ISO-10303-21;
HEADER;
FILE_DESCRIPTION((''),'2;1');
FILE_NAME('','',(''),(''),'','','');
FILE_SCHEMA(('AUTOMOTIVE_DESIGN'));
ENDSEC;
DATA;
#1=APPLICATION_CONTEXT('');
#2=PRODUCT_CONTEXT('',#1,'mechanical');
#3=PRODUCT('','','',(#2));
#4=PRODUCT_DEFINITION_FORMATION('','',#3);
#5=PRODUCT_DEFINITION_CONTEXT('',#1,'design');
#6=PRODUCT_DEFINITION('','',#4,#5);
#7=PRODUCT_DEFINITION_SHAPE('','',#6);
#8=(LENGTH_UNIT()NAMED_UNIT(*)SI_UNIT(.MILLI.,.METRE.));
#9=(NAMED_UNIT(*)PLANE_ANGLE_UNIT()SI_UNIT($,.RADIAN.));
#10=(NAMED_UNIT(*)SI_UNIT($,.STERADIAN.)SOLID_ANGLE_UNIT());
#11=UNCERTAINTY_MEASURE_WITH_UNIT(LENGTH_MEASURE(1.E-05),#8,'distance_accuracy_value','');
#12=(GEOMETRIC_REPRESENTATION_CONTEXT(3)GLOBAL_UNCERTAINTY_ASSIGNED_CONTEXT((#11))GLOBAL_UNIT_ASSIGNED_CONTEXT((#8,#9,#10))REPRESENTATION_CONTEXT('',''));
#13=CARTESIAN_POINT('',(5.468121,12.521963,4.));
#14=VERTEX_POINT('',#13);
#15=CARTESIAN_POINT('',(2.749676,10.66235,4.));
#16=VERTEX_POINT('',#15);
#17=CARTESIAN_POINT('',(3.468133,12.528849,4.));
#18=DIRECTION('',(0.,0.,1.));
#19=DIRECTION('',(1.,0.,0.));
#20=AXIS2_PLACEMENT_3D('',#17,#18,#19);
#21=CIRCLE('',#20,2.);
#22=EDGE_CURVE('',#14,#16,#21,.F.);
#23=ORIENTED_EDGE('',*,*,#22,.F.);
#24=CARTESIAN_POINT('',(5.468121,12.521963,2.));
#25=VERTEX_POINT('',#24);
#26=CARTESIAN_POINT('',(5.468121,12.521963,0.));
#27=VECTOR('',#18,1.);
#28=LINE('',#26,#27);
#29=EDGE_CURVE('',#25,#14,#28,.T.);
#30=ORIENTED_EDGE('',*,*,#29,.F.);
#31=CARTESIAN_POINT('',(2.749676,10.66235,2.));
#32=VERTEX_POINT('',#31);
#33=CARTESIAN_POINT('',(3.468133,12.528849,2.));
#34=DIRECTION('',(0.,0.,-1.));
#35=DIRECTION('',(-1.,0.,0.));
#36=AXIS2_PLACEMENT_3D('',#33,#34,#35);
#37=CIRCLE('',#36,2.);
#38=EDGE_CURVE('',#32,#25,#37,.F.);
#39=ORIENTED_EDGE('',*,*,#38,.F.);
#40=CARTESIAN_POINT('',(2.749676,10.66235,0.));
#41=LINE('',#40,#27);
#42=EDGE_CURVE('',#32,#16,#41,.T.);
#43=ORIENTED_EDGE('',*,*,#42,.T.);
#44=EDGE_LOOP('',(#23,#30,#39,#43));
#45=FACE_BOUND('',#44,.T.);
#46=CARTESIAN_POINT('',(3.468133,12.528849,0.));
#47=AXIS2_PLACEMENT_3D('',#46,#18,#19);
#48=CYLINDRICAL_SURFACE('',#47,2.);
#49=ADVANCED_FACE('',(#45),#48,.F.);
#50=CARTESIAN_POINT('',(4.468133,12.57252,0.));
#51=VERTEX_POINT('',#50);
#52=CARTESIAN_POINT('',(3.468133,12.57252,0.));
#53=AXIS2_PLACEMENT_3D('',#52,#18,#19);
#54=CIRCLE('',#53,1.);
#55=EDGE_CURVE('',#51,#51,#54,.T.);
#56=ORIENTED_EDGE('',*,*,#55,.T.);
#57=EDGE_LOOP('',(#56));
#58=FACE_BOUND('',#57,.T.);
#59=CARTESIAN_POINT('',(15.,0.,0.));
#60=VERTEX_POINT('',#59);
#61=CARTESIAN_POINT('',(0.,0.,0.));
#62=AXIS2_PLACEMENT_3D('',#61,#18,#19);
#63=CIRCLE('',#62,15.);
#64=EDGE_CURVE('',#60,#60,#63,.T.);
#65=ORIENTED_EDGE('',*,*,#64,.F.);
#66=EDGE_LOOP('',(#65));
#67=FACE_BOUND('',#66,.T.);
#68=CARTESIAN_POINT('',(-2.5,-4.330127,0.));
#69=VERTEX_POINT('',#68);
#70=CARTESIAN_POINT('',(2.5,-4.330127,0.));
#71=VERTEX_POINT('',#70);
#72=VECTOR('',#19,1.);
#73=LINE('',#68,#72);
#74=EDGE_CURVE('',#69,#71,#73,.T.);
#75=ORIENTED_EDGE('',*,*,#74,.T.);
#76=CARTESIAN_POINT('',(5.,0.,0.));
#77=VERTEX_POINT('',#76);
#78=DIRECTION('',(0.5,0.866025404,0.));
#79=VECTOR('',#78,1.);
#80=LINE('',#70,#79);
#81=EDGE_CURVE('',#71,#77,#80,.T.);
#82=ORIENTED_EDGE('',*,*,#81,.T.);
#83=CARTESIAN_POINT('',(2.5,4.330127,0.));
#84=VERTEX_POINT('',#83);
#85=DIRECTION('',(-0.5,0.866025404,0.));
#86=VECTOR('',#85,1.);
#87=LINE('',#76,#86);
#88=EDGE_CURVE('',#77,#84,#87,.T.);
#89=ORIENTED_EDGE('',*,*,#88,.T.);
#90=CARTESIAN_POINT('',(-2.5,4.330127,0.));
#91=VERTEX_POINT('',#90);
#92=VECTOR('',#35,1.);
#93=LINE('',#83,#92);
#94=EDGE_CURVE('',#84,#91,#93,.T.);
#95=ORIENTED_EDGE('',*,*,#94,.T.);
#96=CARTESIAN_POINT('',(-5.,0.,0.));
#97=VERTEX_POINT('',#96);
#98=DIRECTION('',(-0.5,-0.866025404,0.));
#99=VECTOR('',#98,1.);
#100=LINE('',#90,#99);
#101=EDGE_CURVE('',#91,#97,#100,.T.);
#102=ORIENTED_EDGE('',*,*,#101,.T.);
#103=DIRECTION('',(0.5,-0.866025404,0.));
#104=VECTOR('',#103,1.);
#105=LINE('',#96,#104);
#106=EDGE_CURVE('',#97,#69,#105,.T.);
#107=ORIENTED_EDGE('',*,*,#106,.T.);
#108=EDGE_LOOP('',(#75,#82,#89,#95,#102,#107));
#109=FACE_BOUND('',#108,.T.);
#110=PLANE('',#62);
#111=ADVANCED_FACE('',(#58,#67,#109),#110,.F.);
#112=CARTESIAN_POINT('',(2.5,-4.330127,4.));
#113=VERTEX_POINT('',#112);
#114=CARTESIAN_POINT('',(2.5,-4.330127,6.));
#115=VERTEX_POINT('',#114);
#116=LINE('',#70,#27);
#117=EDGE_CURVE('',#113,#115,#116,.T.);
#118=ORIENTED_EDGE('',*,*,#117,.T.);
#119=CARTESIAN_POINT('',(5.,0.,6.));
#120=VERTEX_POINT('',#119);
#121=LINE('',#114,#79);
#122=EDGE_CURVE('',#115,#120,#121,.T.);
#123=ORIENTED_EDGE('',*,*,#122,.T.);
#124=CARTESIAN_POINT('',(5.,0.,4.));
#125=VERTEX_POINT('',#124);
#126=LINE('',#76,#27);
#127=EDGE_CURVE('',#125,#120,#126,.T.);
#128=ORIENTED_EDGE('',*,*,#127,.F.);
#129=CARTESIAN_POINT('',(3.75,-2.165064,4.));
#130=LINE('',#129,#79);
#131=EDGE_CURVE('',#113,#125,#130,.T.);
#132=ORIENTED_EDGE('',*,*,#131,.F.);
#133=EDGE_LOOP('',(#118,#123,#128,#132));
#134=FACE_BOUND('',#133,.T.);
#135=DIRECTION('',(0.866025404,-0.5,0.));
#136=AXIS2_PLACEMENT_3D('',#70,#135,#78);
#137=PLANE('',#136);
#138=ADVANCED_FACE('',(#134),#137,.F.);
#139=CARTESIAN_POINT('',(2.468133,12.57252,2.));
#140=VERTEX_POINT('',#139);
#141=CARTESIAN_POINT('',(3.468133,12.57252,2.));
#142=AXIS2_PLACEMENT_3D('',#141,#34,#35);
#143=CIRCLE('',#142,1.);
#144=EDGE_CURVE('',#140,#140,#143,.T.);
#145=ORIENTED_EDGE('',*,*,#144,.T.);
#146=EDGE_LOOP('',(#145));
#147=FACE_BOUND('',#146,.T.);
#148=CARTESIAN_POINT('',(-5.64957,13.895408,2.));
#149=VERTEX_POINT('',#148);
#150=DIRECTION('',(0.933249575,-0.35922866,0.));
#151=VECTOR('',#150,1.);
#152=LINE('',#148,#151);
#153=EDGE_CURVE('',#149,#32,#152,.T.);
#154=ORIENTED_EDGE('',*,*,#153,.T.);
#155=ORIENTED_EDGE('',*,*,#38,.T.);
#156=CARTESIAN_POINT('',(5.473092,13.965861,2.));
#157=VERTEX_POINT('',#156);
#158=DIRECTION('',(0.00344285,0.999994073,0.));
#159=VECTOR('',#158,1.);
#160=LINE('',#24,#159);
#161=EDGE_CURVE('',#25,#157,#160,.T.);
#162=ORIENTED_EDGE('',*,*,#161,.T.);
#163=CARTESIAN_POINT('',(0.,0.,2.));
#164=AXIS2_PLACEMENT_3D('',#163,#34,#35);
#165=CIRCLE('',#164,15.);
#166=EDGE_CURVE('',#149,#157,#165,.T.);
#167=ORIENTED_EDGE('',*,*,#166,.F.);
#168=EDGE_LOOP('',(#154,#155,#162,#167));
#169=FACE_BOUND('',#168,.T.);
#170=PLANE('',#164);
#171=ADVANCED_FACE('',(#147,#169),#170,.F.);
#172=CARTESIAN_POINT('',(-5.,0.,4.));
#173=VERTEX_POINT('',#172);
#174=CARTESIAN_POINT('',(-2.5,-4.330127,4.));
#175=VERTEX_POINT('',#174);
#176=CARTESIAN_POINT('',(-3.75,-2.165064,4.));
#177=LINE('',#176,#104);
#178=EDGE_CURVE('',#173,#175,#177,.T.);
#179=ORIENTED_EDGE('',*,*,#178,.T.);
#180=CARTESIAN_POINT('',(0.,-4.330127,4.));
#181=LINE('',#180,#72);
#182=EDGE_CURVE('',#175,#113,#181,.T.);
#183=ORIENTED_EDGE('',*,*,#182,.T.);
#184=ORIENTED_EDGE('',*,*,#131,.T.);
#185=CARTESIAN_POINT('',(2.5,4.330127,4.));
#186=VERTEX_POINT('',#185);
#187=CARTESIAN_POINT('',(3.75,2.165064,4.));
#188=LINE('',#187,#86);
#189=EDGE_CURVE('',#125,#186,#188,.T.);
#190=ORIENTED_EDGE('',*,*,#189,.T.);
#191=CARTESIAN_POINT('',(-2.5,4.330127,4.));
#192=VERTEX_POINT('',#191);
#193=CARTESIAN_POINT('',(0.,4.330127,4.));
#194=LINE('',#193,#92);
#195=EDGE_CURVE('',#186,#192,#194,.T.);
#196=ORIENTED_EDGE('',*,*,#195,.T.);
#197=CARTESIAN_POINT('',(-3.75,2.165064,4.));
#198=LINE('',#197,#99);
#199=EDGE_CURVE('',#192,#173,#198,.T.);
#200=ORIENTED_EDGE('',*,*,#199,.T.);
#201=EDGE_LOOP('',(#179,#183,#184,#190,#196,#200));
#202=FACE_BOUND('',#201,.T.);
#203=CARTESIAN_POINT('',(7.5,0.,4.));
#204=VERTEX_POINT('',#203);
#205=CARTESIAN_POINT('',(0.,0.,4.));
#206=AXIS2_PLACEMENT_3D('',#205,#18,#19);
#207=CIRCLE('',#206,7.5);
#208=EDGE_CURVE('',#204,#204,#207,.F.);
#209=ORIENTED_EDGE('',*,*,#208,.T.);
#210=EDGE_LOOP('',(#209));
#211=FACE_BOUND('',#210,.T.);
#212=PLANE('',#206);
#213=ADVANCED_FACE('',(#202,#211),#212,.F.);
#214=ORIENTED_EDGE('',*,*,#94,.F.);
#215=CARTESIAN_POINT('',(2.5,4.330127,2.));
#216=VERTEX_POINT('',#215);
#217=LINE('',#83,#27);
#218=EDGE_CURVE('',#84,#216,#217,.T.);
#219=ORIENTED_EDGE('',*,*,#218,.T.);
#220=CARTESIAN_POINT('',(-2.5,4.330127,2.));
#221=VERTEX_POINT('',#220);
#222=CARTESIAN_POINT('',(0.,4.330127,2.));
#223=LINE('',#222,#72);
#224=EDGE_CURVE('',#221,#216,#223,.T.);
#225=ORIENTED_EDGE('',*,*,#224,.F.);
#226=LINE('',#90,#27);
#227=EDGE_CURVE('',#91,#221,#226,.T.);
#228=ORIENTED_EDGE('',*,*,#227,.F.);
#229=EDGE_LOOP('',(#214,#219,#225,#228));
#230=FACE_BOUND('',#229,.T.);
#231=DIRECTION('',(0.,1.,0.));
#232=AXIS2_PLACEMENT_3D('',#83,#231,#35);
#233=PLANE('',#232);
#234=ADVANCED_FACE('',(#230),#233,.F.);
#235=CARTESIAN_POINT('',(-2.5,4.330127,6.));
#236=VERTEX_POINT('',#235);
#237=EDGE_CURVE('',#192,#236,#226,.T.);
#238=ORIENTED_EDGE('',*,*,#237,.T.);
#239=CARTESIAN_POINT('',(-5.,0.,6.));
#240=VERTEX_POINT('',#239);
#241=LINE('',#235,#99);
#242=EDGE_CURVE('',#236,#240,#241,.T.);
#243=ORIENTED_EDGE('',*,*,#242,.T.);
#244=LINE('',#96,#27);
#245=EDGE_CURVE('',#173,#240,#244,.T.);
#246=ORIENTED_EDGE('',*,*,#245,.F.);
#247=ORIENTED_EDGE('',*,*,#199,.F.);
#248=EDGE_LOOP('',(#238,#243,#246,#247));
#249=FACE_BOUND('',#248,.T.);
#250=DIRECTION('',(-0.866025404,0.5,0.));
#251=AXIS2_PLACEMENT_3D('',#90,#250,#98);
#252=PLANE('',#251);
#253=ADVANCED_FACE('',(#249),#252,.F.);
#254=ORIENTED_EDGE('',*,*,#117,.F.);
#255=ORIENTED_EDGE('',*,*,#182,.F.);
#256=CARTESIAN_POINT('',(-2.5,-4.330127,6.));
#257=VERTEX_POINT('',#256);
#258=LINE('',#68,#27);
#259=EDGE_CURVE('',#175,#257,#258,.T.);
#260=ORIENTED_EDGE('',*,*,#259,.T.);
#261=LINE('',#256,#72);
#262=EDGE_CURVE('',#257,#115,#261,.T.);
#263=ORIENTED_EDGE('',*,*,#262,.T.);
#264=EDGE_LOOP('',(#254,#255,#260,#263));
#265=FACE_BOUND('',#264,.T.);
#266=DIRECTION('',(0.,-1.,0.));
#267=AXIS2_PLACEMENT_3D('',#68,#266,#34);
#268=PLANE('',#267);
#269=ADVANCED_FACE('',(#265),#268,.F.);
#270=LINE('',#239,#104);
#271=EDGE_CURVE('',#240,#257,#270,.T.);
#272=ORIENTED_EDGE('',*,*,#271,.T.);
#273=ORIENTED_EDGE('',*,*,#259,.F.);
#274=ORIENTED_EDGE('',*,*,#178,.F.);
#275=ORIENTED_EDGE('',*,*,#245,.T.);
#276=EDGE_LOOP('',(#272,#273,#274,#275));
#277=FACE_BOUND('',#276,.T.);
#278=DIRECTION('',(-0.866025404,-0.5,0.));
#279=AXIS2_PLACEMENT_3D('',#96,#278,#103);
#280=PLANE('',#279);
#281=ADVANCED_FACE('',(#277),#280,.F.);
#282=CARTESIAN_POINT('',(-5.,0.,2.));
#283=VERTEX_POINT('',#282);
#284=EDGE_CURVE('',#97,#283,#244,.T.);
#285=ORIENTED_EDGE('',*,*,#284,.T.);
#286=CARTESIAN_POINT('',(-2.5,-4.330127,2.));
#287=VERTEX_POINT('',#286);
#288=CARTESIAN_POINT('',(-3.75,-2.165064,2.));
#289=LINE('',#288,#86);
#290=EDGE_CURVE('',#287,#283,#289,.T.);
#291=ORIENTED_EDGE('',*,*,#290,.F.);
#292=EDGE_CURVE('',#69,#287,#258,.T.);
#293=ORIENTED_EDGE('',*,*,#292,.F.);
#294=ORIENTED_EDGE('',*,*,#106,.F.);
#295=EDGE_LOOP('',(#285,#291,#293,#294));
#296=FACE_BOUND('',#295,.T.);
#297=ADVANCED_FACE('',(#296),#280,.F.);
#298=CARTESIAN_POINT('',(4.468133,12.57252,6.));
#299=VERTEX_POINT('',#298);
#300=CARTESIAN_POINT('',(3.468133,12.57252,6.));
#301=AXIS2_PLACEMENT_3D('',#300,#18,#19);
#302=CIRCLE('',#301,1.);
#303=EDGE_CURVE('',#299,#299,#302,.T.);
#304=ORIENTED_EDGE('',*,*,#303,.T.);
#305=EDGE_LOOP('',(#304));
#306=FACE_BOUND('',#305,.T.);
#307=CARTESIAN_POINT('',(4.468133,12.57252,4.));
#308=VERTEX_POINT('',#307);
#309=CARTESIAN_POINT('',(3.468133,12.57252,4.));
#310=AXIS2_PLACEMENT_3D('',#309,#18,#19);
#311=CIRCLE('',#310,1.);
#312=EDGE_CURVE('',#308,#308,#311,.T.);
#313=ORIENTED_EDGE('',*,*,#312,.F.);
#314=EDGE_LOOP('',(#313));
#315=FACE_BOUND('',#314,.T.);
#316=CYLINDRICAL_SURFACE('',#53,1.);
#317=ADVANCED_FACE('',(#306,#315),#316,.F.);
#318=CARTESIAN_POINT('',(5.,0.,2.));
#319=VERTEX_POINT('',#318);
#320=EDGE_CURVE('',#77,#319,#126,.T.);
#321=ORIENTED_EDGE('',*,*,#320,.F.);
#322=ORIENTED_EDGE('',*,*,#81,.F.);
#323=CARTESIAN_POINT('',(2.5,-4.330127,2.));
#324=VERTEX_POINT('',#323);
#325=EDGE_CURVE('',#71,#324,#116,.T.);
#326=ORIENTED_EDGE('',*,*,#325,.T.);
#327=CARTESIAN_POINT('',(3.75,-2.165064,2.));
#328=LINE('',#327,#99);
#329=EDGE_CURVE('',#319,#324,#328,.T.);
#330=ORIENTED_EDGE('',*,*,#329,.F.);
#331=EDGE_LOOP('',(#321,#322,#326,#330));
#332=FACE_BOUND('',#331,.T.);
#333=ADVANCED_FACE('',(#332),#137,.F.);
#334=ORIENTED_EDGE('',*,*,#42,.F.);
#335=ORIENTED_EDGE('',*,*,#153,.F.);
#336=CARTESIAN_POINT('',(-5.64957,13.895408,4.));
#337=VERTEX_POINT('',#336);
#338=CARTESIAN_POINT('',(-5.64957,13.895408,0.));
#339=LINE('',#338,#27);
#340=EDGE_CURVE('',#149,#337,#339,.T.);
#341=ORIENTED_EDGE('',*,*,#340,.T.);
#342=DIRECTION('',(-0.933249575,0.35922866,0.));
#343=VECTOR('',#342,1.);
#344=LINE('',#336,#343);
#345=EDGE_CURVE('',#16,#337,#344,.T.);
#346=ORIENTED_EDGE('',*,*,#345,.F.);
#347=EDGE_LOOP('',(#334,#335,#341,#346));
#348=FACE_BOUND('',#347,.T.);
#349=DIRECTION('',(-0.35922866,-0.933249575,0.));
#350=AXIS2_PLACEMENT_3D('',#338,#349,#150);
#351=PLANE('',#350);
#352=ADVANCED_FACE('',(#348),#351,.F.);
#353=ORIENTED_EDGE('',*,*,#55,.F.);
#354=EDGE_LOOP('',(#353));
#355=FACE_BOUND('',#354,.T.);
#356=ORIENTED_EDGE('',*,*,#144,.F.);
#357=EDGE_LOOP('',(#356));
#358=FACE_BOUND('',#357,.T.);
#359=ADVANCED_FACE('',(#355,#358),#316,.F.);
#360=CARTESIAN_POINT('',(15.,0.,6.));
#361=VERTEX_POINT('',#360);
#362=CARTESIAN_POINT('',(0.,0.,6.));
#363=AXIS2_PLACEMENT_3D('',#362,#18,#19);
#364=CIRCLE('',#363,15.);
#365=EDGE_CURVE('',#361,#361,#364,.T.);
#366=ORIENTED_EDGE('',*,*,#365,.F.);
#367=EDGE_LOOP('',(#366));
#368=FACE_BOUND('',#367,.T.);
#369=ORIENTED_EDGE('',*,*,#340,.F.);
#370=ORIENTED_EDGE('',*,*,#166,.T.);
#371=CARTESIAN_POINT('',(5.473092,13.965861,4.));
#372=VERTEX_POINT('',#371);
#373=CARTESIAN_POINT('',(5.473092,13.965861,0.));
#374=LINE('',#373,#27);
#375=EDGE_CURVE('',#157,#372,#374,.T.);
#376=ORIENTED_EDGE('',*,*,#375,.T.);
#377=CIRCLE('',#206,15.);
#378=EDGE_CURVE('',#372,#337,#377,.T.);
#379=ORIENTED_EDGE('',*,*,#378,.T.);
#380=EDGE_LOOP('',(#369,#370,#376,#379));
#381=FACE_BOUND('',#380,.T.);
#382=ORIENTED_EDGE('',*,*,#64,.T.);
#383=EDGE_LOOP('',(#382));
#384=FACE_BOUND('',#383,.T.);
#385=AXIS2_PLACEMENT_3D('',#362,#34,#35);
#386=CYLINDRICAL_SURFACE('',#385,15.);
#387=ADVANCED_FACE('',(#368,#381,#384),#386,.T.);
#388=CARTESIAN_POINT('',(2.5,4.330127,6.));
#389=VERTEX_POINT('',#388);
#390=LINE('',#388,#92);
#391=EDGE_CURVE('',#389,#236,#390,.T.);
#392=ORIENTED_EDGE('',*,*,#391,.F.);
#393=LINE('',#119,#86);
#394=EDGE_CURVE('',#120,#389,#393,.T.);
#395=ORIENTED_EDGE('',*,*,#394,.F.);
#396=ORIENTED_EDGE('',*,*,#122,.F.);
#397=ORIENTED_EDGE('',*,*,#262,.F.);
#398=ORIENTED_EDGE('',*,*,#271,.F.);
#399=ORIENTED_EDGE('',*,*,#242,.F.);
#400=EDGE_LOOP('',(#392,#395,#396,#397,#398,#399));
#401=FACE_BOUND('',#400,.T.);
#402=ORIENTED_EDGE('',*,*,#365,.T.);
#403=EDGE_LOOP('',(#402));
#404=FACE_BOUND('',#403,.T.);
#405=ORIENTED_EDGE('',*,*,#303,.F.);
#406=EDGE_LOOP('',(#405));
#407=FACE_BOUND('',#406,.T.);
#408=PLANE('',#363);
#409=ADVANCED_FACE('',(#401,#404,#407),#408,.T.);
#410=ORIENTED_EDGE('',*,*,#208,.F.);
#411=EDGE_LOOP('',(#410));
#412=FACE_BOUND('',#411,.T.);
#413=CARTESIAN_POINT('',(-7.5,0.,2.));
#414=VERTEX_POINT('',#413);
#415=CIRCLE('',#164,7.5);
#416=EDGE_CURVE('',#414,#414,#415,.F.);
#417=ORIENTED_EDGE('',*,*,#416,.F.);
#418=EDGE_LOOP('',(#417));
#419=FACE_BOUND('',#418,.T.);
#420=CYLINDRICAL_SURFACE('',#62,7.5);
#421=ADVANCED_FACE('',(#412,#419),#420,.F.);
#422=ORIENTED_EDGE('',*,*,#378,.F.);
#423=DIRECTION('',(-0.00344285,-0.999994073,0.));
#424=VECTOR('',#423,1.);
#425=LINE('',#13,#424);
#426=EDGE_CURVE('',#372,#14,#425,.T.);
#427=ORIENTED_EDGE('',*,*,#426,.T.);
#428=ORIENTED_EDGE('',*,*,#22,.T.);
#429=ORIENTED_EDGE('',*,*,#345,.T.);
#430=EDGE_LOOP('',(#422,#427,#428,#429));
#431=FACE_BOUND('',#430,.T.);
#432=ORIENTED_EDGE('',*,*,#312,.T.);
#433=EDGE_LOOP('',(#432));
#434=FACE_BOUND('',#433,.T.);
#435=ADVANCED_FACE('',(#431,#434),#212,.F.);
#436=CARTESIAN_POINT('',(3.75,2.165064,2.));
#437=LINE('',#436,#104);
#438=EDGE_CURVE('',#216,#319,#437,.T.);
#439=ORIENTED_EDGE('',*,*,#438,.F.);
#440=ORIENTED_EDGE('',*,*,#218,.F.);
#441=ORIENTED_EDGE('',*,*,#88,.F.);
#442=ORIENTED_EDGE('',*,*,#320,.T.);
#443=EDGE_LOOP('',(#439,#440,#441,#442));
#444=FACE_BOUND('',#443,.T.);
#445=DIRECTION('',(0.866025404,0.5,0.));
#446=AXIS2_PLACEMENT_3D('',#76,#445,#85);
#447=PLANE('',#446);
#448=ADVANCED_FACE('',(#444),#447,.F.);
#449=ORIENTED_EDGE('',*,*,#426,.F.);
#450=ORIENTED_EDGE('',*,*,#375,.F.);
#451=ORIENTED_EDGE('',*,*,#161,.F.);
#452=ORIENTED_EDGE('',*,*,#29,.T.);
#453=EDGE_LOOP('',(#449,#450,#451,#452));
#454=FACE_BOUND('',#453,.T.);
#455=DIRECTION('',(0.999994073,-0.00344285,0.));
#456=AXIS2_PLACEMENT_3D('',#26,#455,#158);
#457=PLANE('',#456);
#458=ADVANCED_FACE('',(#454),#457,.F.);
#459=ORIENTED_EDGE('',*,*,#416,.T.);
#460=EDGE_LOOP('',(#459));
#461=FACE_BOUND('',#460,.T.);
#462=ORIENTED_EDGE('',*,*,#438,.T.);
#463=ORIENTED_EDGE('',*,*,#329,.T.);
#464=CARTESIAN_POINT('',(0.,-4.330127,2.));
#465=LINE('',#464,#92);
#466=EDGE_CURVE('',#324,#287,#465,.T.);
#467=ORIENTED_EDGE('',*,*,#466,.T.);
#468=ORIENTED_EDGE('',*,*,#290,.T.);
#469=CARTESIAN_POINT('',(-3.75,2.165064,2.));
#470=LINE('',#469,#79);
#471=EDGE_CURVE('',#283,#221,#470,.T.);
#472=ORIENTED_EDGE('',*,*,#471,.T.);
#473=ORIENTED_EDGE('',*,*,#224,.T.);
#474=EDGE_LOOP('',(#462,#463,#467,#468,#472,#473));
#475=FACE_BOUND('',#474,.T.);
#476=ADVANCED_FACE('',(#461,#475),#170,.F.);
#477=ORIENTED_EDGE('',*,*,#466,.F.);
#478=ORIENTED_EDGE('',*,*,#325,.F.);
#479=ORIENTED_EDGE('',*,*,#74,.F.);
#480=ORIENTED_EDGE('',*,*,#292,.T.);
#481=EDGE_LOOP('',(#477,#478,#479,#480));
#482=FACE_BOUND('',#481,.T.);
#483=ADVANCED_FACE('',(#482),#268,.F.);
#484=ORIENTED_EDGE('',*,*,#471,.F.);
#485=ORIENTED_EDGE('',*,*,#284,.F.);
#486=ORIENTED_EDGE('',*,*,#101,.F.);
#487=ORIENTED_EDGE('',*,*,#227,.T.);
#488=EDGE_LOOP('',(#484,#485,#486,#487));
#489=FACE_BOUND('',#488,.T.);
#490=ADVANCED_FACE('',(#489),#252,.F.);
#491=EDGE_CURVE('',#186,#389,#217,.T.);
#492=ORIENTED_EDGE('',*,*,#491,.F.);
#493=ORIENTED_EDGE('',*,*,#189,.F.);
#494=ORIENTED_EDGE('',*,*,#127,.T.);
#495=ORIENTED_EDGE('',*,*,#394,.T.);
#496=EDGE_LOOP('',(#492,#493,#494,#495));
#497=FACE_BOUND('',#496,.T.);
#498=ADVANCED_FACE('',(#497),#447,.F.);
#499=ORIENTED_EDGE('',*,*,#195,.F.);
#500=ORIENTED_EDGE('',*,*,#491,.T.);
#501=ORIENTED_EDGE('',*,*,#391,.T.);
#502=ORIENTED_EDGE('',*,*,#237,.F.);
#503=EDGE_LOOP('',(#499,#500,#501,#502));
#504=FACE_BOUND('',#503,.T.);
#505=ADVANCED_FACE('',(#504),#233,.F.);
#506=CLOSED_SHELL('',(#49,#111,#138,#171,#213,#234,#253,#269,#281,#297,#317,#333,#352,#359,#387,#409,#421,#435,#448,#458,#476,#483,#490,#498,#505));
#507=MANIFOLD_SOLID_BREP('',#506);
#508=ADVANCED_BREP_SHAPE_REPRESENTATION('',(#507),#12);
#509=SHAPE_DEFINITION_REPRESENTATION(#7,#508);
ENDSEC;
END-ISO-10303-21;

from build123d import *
from build123d.topology import SkipClean

# Parameters (mm, degrees)
SKETCH_1_R               = 15
EXTRUDE_1_DEPTH          = 6
CUT_EXTRUDE_1_DEPTH      = 23.045407685
SKETCH_5_R               = 7.5
CUT_EXTRUDE_2_DEPTH      = 23.045407685
EXTRUDE_START            = -2
SKETCH_6_R               = 15
EXTRUDE_4_DEPTH          = 2
SKETCH_7_R               = 15
EXTRUDE_5_DEPTH          = 2
CUT_EXTRUDE_3_DEPTH      = 22.587033145
CUT_EXTRUDE_3_DEPTH_BACK = 22.587033145
SKETCH_8_R               = 1
CUT_EXTRUDE_4_DEPTH      = 23.045407685


with BuildPart() as part:
    # 草图1 → 凸台-拉伸1 (new body)
    with BuildSketch(Plane.XY):
        Circle(SKETCH_1_R)
    extrude(amount=EXTRUDE_1_DEPTH)

    # 草图2 → 切除-拉伸1 (cut, through all)
    with BuildSketch(Plane.XY.offset(6)):
        with BuildLine():
            Line((-5.64957048, 13.895407637), (2.749675697, 10.662349694))
            ThreePointArc((2.749675697, 10.662349694), (4.597345514, 10.878128051), (5.468121165, 12.521963144))
            Line((5.468121165, 12.521963144), (5.473092316, 13.965860536))
            ThreePointArc((5.473092316, 13.965860536), (-0.095010727, 14.999699096), (-5.64957048, 13.895407637))
        make_face()
    extrude(amount=-CUT_EXTRUDE_1_DEPTH, mode=Mode.SUBTRACT)

    # 草图5 → 切除-拉伸2 (cut, through all)
    with BuildSketch(Plane.XY.offset(6)):
        Circle(SKETCH_5_R)
    extrude(amount=-CUT_EXTRUDE_2_DEPTH, mode=Mode.SUBTRACT)

    # 草图6 → 凸台-拉伸4 (add)
    with BuildSketch(Plane.XY.offset(6).offset(EXTRUDE_START)):
        Circle(SKETCH_6_R)
    extrude(amount=EXTRUDE_4_DEPTH)

    # 草图7 → 凸台-拉伸5 (add)
    with SkipClean():  # the faces are left unmerged after this step: merging them gives an invalid solid
        with BuildSketch(Plane(origin=(0, 0, 0), x_dir=(-1, 0, 0), z_dir=(0, 0, -1))):
            Circle(SKETCH_7_R)
        extrude(amount=-EXTRUDE_5_DEPTH)

    # 草图8 → 切除-拉伸3 (cut, two sides: drawn at the far end of the back side and taken through both)
    with SkipClean():  # the faces are left unmerged after this step: merging them gives an invalid solid
        with BuildSketch(Plane.XY.offset(2).offset(-CUT_EXTRUDE_3_DEPTH_BACK)):
            with Locations((3.468133018, 12.572519868)):
                Circle(SKETCH_8_R)
        extrude(amount=CUT_EXTRUDE_3_DEPTH + CUT_EXTRUDE_3_DEPTH_BACK, mode=Mode.SUBTRACT)

    # 草图9 → 切除-拉伸4 (cut, through all)
    with SkipClean():  # the faces are left unmerged after this step: merging them gives an invalid solid
        with BuildSketch(Plane.XY.offset(6)):
            Polygon((2.5, -4.330127019), (5, 0), (2.5, 4.330127019), (-2.5, 4.330127019), (-5, 0), (-2.5, -4.330127019), align=None)
        extrude(amount=-CUT_EXTRUDE_4_DEPTH, mode=Mode.SUBTRACT)


solid = part.part
